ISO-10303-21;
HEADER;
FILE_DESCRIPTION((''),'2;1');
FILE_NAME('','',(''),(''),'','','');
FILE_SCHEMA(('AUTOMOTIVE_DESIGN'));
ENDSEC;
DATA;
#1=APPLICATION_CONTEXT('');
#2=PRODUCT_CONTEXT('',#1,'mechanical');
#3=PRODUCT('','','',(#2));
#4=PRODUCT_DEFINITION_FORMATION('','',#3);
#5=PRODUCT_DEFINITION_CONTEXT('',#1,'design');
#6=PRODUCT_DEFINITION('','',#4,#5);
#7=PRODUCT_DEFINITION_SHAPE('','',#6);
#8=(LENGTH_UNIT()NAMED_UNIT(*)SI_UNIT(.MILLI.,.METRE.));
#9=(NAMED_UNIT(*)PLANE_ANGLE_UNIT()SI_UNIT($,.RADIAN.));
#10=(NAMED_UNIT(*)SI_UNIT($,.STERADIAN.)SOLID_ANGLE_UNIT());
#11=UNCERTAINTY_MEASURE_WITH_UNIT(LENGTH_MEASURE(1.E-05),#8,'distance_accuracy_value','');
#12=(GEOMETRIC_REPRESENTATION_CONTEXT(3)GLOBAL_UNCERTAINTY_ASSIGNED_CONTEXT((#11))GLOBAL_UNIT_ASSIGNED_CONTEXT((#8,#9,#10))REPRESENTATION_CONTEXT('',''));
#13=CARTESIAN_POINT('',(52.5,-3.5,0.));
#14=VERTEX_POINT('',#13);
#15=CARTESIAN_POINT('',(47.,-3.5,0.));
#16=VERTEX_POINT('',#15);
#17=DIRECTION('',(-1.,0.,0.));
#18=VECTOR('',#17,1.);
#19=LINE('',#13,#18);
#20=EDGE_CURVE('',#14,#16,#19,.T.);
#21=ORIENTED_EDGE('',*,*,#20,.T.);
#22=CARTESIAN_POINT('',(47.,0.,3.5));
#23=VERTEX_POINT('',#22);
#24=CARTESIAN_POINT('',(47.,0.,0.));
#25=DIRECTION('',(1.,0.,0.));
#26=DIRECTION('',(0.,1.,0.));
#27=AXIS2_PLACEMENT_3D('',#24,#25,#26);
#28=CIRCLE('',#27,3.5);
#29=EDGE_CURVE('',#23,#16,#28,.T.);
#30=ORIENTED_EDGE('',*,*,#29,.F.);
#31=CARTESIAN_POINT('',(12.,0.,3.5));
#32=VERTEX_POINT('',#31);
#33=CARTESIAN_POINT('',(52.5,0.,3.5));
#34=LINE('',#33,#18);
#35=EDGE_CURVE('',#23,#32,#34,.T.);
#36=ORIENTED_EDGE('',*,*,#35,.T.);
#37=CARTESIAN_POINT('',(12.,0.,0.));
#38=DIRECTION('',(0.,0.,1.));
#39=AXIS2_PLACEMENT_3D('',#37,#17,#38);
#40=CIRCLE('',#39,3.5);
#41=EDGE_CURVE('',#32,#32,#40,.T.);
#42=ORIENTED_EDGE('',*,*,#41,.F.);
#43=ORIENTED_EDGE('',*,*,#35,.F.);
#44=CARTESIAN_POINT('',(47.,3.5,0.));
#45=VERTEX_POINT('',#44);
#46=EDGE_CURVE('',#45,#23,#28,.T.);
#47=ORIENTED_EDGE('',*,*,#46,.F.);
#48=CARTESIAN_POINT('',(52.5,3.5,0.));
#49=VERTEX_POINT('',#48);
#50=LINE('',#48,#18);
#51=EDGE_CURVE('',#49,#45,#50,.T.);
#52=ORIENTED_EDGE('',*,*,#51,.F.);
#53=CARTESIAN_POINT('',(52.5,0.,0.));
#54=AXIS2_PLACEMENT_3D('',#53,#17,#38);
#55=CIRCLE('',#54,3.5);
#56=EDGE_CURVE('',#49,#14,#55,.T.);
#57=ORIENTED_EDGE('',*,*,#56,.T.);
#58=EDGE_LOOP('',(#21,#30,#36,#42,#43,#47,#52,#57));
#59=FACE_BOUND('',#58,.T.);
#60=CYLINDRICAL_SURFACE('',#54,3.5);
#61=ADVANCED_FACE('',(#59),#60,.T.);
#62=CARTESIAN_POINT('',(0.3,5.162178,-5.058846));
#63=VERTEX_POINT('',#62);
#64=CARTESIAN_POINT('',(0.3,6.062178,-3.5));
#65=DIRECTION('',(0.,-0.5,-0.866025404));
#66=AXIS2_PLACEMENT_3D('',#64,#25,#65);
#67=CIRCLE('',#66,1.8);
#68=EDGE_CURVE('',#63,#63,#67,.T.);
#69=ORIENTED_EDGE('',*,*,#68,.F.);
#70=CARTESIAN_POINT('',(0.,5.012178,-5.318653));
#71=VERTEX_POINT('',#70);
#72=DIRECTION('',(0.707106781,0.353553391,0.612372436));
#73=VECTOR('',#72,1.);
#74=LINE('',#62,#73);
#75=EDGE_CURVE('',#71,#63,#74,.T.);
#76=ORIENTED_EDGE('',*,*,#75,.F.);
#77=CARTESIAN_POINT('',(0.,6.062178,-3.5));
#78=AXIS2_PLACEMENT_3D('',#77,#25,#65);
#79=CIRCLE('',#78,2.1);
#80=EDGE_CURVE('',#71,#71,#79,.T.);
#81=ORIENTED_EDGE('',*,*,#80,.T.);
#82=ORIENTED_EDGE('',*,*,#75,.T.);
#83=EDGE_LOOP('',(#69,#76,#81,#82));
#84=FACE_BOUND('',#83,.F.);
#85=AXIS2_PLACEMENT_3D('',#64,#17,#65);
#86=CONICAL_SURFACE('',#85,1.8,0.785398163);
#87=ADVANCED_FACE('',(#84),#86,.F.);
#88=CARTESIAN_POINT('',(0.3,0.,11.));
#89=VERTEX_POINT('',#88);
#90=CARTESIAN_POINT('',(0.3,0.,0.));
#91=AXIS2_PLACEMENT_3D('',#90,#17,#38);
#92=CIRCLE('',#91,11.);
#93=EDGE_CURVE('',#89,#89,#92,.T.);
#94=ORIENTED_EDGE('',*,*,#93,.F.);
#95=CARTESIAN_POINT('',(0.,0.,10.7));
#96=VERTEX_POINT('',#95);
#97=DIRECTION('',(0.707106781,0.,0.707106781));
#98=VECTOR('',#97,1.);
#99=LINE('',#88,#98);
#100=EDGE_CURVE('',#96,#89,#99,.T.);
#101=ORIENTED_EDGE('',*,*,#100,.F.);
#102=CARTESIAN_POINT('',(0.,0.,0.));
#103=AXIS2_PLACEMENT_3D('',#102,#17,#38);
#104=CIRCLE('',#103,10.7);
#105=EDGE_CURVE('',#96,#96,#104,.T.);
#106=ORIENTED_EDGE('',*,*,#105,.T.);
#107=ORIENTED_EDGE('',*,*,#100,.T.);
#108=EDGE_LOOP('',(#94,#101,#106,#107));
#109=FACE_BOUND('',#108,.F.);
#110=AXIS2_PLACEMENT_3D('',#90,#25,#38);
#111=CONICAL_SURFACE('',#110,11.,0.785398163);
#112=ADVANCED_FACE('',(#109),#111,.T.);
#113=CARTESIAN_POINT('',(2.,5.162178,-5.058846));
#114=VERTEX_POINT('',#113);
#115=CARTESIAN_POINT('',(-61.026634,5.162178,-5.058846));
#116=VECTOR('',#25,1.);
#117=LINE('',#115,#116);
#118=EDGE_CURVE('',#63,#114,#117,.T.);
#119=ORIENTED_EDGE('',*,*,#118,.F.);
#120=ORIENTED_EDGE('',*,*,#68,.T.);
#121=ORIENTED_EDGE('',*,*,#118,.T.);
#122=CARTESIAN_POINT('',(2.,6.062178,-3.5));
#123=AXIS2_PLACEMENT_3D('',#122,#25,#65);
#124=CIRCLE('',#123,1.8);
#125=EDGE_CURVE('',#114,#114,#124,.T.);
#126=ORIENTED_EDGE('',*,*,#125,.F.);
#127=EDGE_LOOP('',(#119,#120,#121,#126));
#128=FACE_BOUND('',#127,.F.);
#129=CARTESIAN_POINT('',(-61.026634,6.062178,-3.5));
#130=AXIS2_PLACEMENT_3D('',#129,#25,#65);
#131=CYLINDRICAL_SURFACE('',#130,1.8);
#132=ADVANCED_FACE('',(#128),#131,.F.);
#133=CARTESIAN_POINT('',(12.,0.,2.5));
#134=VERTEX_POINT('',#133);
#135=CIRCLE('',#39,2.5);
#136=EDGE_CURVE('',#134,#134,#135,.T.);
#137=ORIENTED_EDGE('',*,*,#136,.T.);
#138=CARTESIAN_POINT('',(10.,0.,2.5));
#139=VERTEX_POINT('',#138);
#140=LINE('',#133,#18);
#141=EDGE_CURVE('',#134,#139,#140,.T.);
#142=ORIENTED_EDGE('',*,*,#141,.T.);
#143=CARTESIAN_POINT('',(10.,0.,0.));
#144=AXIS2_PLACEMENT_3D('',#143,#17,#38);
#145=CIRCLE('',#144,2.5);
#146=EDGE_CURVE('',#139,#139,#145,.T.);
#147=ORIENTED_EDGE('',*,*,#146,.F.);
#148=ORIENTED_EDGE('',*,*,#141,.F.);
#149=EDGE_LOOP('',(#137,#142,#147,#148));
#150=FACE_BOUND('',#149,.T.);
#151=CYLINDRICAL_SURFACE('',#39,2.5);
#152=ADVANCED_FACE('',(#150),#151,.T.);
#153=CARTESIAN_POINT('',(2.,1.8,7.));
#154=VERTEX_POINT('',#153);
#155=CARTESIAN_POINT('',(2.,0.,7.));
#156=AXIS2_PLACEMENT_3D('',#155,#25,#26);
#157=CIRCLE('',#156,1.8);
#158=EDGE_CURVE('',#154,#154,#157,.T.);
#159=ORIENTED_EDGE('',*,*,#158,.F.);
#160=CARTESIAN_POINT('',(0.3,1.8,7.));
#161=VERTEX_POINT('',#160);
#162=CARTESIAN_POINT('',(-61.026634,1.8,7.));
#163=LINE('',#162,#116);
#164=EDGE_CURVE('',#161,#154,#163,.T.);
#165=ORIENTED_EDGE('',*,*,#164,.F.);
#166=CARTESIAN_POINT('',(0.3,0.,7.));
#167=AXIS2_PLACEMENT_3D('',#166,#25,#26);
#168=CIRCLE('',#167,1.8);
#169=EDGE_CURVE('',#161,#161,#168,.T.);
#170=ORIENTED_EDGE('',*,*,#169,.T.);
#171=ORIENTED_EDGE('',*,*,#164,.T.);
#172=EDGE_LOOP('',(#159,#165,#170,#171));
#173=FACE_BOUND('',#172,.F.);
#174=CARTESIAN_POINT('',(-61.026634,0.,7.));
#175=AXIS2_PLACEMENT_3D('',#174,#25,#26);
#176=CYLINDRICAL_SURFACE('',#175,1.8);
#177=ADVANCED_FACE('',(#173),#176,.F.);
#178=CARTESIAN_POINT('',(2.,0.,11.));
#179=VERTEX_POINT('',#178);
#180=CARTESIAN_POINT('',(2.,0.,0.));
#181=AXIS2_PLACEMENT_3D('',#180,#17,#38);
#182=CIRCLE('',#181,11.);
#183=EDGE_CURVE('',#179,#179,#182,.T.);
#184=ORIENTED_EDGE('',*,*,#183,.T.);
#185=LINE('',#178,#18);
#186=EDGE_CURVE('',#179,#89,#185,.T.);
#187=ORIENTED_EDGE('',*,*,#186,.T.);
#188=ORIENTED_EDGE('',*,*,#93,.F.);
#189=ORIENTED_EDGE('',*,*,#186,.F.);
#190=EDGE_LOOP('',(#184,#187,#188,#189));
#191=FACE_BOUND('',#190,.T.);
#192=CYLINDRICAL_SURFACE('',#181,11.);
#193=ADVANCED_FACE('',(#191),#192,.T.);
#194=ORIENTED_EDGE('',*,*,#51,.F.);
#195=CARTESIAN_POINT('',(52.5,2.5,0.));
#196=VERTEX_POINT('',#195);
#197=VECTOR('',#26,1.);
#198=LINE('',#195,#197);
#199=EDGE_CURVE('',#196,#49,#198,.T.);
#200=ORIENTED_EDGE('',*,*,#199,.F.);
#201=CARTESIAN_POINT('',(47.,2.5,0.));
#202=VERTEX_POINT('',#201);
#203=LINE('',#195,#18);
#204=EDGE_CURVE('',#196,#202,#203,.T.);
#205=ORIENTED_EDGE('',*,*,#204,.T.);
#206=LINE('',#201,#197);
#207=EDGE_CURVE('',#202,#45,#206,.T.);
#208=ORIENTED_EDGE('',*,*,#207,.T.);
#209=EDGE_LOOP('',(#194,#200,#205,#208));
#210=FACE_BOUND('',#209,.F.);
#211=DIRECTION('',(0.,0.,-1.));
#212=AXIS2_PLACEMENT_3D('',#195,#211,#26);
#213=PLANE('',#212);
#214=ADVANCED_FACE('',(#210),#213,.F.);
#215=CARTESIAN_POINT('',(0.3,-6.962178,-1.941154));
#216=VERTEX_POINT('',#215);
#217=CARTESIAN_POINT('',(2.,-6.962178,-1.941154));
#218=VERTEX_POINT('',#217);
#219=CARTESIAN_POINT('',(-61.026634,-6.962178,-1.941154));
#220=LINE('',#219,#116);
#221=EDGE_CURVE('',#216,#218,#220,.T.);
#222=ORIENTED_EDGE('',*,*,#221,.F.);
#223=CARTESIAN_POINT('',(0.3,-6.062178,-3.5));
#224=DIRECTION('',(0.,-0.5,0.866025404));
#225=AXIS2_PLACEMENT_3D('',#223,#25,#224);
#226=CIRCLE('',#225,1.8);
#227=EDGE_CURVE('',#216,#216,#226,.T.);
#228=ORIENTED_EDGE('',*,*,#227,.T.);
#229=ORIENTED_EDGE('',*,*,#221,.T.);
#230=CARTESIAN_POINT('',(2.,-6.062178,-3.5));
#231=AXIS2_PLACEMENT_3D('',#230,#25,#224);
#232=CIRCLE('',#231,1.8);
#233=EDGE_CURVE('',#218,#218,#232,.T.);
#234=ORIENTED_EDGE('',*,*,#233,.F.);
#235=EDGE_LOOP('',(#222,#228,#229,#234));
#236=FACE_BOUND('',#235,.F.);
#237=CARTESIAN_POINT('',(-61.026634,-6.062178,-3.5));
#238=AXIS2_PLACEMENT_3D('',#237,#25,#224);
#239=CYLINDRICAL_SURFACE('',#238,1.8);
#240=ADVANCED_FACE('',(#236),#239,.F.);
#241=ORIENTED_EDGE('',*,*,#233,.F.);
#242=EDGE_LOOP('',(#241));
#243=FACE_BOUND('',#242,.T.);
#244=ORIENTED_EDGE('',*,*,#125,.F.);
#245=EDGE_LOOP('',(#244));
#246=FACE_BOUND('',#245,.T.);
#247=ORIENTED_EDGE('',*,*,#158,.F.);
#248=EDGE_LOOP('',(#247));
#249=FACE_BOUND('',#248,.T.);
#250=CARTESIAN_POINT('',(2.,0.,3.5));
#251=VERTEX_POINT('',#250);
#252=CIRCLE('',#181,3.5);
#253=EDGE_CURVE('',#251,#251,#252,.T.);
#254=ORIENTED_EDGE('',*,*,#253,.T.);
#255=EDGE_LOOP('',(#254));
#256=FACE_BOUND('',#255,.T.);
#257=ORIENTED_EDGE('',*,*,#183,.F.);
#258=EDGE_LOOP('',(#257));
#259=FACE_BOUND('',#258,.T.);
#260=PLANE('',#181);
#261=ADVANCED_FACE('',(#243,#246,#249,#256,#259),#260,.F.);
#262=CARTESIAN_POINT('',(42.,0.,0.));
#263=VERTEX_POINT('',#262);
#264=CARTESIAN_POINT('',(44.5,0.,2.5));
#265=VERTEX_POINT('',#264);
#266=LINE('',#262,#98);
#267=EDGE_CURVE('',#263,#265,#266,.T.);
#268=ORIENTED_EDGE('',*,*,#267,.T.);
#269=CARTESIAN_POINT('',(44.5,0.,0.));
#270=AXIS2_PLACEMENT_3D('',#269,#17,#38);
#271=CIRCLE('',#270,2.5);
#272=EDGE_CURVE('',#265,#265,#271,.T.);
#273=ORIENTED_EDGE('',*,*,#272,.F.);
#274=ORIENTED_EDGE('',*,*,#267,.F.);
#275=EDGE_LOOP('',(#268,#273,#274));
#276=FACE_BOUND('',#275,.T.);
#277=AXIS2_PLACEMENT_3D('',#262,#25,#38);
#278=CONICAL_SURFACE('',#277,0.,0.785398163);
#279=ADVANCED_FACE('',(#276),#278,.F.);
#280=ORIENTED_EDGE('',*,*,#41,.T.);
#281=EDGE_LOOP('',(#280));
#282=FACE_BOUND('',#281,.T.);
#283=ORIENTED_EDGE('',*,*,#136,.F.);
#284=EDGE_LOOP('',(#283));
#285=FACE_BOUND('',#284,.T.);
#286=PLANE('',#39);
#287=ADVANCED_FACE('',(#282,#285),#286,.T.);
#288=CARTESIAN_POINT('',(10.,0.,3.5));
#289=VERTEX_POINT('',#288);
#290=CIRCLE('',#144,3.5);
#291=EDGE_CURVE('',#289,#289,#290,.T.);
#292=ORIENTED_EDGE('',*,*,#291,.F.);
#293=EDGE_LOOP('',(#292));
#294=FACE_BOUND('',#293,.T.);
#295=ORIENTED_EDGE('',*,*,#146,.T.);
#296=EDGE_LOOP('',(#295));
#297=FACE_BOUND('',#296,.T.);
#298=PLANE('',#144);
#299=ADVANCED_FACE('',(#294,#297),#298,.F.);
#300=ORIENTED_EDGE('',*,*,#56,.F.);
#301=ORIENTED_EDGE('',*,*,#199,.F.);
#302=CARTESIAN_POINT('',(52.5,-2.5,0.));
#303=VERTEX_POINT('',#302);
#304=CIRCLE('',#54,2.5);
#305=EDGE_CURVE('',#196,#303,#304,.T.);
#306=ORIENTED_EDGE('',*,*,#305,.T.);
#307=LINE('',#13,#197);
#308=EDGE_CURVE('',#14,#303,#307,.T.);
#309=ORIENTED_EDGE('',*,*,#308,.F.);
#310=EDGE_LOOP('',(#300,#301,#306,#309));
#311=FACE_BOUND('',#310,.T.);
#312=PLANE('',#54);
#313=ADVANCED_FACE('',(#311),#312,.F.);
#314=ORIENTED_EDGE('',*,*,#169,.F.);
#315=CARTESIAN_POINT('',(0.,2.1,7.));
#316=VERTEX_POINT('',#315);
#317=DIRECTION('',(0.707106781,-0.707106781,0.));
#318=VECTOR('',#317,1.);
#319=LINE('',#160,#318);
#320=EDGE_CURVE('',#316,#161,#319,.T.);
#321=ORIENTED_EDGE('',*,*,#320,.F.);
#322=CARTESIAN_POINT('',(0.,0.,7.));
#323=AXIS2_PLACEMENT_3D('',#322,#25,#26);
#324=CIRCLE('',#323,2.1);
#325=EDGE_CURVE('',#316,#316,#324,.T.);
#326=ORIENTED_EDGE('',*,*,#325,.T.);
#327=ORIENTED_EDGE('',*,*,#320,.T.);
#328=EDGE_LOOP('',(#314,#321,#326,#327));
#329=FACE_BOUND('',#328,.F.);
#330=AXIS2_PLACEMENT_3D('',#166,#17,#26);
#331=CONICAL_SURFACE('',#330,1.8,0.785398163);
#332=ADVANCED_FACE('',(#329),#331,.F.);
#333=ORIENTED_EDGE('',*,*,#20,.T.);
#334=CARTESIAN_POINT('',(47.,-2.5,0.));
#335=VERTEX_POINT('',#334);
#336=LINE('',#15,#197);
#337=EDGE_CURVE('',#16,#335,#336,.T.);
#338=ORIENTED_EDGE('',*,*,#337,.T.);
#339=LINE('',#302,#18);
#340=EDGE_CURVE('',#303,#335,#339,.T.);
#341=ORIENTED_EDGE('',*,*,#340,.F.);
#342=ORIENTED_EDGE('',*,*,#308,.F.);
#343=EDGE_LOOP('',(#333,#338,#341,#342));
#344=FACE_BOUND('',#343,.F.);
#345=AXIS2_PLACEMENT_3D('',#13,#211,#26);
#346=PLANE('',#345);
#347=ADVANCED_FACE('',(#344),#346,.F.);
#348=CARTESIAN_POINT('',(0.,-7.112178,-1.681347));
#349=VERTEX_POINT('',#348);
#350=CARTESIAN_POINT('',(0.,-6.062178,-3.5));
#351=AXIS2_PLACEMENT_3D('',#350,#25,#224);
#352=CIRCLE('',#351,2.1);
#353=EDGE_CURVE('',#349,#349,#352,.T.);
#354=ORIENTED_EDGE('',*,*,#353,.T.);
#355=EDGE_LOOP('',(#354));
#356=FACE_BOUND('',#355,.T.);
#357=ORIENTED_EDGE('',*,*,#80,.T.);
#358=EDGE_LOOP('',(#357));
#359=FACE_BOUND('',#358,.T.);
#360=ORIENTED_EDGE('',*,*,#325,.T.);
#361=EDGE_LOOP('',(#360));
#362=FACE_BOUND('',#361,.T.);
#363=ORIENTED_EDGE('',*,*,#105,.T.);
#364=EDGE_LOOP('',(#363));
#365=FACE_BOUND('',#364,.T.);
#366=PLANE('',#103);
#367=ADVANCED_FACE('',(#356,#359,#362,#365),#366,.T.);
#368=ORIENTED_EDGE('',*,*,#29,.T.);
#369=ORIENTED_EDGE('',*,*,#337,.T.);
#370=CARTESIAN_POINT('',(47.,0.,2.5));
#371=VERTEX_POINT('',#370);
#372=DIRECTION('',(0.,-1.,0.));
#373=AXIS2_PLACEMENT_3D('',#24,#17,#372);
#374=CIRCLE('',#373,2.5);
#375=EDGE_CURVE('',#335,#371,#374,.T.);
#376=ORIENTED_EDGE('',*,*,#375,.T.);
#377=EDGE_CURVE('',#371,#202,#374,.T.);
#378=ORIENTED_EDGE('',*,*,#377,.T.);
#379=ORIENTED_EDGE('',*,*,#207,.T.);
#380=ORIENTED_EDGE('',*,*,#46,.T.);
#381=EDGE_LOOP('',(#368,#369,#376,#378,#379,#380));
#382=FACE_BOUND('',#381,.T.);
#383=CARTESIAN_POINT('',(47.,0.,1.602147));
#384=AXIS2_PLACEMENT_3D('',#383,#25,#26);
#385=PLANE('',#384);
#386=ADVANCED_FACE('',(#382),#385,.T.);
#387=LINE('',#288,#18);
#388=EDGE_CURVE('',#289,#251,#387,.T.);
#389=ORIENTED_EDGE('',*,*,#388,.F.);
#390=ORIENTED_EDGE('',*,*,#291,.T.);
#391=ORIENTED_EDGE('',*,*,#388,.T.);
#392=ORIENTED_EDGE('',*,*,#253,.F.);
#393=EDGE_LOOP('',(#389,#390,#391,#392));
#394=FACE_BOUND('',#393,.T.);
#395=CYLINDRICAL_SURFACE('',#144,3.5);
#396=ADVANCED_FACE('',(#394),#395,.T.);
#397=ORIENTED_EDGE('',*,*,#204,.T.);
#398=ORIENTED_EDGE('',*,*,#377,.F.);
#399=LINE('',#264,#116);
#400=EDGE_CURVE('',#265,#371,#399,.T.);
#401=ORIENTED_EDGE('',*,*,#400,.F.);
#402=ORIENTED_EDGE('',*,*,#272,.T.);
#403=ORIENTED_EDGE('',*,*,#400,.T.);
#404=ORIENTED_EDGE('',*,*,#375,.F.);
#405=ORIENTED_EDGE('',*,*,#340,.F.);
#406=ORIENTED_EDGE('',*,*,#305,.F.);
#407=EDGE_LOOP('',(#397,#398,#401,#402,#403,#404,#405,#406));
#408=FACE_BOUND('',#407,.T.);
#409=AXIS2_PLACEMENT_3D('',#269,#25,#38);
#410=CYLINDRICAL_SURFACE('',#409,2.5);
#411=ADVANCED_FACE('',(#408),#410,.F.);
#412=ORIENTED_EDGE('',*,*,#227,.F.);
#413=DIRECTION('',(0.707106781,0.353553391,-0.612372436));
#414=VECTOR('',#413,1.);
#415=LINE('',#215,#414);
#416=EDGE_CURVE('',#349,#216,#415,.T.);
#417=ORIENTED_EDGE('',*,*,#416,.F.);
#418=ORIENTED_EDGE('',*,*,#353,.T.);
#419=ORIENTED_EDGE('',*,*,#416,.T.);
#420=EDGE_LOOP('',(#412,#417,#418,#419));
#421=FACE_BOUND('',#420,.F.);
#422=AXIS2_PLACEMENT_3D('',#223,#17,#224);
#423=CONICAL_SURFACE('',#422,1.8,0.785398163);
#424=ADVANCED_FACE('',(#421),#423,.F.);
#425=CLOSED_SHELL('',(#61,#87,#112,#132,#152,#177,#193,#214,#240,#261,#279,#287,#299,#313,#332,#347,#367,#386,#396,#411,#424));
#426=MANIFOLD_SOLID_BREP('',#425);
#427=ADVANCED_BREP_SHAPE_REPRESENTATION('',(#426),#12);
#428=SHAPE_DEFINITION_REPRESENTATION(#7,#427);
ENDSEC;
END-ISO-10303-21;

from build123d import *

# Parameters (mm, degrees)
F3_DEPTH        = 5.5
F5_D            = 3.6
F5_COPIES_COUNT = 3
F6_SIZE         = 0.3


# Not quite as in the source:
# - a pattern or mirror of a feature is missing from the dataset's text; its kind, count and spacing are read off the source's solid


with BuildPart() as f1:
    # F0 (on Front) → F1 (revolve)
    with BuildSketch(Plane.XZ):
        Polygon((0, 11), (0, 0), (42, 0), (44.5, 2.5), (52.5, 2.5), (52.5, 3.5), (12, 3.5), (12, 2.5), (10, 2.5), (10, 3.5), (2, 3.5), (2, 11), align=None)
    revolve(axis=Axis((21, 0, 0), (-1, 0, 0)))

    # F2 (on face) → F3 (cut)
    with BuildSketch(Plane.YZ.offset(52.5)):
        with BuildLine():
            Line((2.5, 0), (3.5, 0))
            ThreePointArc((3.5, 0), (0, 3.5), (-3.5, 0))
            Line((-3.5, 0), (-2.5, 0))
            ThreePointArc((-2.5, 0), (0, 2.5), (2.5, 0))
        make_face()
    extrude(amount=-F3_DEPTH, mode=Mode.SUBTRACT)

    # F5 (through all)
    with Locations(Plane(origin=(0, 0, 0), x_dir=(0, -1, 0), z_dir=(-1, 0, 0))):
        with Locations((0, 7)):
            f5 = Hole(F5_D / 2)

    # F5_copies: F5 ×3 about axis
    f5_copies_axis = Axis((0, 0, 0), (1, 0, 0))
    for i in range(1, F5_COPIES_COUNT):
        add(f5.rotate(f5_copies_axis, i * 360 / F5_COPIES_COUNT), mode=Mode.SUBTRACT)

    # F6
    f6_edges = [f1.edges().sort_by_distance(p)[0] for p in [
        (0, 0, -11),
        (0, -6.962178, -1.941154),
        (0, 5.162178, -5.058846),
        (0, 1.8, 7),
    ]]
    chamfer(f6_edges, length=F6_SIZE)


solid = f1.part
